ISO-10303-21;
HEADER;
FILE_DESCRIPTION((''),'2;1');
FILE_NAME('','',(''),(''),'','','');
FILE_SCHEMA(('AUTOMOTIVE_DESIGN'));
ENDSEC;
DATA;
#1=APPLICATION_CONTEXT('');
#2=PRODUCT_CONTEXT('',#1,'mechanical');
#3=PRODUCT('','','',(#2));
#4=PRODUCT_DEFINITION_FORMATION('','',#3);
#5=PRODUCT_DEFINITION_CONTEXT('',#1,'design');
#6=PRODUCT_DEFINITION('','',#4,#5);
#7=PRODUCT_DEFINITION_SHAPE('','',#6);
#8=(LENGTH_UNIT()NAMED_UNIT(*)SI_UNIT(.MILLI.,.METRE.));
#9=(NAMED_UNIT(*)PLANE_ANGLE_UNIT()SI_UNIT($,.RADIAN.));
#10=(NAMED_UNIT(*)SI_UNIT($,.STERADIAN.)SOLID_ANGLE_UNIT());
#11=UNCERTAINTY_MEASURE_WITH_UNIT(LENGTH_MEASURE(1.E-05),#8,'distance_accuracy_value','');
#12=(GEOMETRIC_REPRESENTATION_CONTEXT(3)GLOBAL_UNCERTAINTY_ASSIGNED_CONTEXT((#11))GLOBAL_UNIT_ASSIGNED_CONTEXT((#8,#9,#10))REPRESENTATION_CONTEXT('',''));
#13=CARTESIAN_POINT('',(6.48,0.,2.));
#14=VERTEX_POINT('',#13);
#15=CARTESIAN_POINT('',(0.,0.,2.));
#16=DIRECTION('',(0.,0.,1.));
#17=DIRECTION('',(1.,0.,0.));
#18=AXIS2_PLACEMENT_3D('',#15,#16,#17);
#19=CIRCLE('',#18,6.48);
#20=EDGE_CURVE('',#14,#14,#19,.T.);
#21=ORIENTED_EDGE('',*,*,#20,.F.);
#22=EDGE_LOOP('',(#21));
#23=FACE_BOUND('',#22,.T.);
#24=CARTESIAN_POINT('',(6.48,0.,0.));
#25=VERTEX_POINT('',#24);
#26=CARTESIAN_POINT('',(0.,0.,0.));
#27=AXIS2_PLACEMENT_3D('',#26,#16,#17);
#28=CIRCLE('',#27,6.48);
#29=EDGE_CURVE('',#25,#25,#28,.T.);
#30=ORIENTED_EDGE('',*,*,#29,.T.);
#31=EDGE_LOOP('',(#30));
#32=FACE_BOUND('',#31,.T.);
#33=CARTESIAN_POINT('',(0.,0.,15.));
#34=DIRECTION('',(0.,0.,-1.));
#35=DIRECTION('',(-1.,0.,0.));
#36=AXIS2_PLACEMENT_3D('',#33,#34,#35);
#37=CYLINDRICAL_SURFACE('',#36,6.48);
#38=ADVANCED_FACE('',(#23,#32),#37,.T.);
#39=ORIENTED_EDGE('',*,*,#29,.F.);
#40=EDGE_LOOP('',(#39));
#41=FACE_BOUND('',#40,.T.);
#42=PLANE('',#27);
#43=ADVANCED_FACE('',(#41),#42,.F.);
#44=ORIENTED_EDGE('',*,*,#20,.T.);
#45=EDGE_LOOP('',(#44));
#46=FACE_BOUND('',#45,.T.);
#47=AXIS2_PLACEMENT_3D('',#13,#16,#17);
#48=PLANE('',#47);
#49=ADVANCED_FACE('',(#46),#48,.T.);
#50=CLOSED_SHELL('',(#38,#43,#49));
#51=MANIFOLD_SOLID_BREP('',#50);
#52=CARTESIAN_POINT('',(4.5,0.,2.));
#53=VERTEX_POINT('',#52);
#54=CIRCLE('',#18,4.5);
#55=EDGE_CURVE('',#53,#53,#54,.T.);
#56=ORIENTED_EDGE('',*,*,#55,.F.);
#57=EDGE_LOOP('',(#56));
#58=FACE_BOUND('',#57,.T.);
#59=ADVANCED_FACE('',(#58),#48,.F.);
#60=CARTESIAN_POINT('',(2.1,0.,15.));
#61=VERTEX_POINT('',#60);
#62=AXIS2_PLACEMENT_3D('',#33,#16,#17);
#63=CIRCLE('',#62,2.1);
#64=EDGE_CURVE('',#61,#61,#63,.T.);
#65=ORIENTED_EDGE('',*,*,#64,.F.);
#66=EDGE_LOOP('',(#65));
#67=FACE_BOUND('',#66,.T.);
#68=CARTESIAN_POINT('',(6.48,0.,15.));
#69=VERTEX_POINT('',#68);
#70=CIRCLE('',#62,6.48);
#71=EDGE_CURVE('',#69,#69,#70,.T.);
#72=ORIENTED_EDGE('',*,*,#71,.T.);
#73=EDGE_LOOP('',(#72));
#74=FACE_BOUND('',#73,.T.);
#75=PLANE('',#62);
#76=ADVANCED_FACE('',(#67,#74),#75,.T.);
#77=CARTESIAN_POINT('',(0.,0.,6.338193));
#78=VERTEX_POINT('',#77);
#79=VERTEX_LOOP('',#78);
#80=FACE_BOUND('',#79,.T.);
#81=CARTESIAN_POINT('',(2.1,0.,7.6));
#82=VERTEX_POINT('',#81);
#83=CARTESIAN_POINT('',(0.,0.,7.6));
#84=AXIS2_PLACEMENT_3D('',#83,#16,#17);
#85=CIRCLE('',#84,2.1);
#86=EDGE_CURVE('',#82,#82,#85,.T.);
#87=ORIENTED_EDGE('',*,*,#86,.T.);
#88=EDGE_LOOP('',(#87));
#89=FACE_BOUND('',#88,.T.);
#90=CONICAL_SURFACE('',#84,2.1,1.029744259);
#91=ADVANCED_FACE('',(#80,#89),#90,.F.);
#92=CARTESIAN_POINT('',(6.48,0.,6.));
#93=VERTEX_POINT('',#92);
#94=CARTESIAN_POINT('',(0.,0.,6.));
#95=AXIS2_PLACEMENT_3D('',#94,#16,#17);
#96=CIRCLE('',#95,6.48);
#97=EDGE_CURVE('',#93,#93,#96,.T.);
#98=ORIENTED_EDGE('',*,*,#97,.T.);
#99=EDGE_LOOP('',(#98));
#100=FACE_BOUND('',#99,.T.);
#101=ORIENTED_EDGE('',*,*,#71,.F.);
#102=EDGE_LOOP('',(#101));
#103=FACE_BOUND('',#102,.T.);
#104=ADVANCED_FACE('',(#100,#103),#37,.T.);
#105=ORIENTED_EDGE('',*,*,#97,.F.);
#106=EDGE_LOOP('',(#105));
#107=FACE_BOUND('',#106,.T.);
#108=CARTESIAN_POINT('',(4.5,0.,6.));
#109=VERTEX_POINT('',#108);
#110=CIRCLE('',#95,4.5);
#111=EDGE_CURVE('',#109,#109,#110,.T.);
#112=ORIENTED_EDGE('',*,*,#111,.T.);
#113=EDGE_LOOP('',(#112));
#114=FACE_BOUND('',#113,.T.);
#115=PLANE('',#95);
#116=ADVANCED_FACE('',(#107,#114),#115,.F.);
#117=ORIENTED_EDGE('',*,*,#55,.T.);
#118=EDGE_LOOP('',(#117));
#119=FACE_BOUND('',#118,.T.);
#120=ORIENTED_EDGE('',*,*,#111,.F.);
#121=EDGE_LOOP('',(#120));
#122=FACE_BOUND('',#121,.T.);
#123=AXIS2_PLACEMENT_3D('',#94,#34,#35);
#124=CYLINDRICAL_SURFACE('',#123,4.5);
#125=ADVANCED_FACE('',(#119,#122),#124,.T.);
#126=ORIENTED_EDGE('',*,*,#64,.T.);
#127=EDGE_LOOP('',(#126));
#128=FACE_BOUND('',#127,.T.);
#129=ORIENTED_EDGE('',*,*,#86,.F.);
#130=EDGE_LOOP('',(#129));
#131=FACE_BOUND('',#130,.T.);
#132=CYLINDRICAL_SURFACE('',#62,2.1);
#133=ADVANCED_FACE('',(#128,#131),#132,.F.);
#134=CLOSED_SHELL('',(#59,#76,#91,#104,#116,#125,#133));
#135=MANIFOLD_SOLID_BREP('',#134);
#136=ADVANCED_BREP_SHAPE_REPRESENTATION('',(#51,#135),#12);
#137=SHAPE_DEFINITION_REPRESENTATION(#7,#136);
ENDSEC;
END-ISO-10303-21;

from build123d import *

# Parameters (mm, degrees)
SKETCH1_R               = 6.48
BOSS_EXTRUDE1_DEPTH     = 15
CUT_EXTRUDE3_DEPTH      = 2
CUT_EXTRUDE3_DEPTH_BACK = 2
CUT_EXTRUDE3_START      = -11
SKETCH8_OUTSIDE_W       = 19.696
SKETCH8_OUTSIDE_H       = 19.696
SKETCH8_OUTSIDE_R       = 4.5
M5_TAPPED_HOLE1_D       = 4.2
M5_TAPPED_HOLE1_DEPTH   = 7.4
M5_TAPPED_HOLE1_TIP     = 1.2618073


# Read off the part's stored shape, not the designer's step: Split2
with BuildPart() as part:
    # Sketch1 → Boss-Extrude1 (new body)
    with BuildSketch(Plane.XY):
        Circle(SKETCH1_R)
    extrude(amount=BOSS_EXTRUDE1_DEPTH)

    # Sketch8 outside → Cut-Extrude3 (cut, two sides: drawn at the far end of the back side and taken through both)
    with BuildSketch(Plane.XY.offset(15).offset(CUT_EXTRUDE3_START - CUT_EXTRUDE3_DEPTH_BACK)):
        Rectangle(SKETCH8_OUTSIDE_W, SKETCH8_OUTSIDE_H)
        Circle(SKETCH8_OUTSIDE_R, mode=Mode.SUBTRACT)
    extrude(amount=CUT_EXTRUDE3_DEPTH + CUT_EXTRUDE3_DEPTH_BACK, mode=Mode.SUBTRACT)

    # M5 Tapped Hole1
    with Locations(Plane.XY.offset(15)):
        with Locations((0, 0)):
            Hole(M5_TAPPED_HOLE1_D / 2, depth=M5_TAPPED_HOLE1_DEPTH)
            with Locations((0, 0, -(M5_TAPPED_HOLE1_DEPTH + M5_TAPPED_HOLE1_TIP / 2))):  # 118° drill point
                Cone(0, M5_TAPPED_HOLE1_D / 2, M5_TAPPED_HOLE1_TIP, mode=Mode.SUBTRACT)


with BuildPart() as body_2:
    # Split2: the piece on the far side of the plane
    add(part.part)
    split(bisect_by=Plane.XY.offset(2), keep=Keep.BOTTOM)


with BuildPart() as part_1:
    add(part.part)

    # Split2
    split(bisect_by=Plane.XY.offset(2), keep=Keep.TOP)


solid = Compound([body_2.part, part_1.part])
